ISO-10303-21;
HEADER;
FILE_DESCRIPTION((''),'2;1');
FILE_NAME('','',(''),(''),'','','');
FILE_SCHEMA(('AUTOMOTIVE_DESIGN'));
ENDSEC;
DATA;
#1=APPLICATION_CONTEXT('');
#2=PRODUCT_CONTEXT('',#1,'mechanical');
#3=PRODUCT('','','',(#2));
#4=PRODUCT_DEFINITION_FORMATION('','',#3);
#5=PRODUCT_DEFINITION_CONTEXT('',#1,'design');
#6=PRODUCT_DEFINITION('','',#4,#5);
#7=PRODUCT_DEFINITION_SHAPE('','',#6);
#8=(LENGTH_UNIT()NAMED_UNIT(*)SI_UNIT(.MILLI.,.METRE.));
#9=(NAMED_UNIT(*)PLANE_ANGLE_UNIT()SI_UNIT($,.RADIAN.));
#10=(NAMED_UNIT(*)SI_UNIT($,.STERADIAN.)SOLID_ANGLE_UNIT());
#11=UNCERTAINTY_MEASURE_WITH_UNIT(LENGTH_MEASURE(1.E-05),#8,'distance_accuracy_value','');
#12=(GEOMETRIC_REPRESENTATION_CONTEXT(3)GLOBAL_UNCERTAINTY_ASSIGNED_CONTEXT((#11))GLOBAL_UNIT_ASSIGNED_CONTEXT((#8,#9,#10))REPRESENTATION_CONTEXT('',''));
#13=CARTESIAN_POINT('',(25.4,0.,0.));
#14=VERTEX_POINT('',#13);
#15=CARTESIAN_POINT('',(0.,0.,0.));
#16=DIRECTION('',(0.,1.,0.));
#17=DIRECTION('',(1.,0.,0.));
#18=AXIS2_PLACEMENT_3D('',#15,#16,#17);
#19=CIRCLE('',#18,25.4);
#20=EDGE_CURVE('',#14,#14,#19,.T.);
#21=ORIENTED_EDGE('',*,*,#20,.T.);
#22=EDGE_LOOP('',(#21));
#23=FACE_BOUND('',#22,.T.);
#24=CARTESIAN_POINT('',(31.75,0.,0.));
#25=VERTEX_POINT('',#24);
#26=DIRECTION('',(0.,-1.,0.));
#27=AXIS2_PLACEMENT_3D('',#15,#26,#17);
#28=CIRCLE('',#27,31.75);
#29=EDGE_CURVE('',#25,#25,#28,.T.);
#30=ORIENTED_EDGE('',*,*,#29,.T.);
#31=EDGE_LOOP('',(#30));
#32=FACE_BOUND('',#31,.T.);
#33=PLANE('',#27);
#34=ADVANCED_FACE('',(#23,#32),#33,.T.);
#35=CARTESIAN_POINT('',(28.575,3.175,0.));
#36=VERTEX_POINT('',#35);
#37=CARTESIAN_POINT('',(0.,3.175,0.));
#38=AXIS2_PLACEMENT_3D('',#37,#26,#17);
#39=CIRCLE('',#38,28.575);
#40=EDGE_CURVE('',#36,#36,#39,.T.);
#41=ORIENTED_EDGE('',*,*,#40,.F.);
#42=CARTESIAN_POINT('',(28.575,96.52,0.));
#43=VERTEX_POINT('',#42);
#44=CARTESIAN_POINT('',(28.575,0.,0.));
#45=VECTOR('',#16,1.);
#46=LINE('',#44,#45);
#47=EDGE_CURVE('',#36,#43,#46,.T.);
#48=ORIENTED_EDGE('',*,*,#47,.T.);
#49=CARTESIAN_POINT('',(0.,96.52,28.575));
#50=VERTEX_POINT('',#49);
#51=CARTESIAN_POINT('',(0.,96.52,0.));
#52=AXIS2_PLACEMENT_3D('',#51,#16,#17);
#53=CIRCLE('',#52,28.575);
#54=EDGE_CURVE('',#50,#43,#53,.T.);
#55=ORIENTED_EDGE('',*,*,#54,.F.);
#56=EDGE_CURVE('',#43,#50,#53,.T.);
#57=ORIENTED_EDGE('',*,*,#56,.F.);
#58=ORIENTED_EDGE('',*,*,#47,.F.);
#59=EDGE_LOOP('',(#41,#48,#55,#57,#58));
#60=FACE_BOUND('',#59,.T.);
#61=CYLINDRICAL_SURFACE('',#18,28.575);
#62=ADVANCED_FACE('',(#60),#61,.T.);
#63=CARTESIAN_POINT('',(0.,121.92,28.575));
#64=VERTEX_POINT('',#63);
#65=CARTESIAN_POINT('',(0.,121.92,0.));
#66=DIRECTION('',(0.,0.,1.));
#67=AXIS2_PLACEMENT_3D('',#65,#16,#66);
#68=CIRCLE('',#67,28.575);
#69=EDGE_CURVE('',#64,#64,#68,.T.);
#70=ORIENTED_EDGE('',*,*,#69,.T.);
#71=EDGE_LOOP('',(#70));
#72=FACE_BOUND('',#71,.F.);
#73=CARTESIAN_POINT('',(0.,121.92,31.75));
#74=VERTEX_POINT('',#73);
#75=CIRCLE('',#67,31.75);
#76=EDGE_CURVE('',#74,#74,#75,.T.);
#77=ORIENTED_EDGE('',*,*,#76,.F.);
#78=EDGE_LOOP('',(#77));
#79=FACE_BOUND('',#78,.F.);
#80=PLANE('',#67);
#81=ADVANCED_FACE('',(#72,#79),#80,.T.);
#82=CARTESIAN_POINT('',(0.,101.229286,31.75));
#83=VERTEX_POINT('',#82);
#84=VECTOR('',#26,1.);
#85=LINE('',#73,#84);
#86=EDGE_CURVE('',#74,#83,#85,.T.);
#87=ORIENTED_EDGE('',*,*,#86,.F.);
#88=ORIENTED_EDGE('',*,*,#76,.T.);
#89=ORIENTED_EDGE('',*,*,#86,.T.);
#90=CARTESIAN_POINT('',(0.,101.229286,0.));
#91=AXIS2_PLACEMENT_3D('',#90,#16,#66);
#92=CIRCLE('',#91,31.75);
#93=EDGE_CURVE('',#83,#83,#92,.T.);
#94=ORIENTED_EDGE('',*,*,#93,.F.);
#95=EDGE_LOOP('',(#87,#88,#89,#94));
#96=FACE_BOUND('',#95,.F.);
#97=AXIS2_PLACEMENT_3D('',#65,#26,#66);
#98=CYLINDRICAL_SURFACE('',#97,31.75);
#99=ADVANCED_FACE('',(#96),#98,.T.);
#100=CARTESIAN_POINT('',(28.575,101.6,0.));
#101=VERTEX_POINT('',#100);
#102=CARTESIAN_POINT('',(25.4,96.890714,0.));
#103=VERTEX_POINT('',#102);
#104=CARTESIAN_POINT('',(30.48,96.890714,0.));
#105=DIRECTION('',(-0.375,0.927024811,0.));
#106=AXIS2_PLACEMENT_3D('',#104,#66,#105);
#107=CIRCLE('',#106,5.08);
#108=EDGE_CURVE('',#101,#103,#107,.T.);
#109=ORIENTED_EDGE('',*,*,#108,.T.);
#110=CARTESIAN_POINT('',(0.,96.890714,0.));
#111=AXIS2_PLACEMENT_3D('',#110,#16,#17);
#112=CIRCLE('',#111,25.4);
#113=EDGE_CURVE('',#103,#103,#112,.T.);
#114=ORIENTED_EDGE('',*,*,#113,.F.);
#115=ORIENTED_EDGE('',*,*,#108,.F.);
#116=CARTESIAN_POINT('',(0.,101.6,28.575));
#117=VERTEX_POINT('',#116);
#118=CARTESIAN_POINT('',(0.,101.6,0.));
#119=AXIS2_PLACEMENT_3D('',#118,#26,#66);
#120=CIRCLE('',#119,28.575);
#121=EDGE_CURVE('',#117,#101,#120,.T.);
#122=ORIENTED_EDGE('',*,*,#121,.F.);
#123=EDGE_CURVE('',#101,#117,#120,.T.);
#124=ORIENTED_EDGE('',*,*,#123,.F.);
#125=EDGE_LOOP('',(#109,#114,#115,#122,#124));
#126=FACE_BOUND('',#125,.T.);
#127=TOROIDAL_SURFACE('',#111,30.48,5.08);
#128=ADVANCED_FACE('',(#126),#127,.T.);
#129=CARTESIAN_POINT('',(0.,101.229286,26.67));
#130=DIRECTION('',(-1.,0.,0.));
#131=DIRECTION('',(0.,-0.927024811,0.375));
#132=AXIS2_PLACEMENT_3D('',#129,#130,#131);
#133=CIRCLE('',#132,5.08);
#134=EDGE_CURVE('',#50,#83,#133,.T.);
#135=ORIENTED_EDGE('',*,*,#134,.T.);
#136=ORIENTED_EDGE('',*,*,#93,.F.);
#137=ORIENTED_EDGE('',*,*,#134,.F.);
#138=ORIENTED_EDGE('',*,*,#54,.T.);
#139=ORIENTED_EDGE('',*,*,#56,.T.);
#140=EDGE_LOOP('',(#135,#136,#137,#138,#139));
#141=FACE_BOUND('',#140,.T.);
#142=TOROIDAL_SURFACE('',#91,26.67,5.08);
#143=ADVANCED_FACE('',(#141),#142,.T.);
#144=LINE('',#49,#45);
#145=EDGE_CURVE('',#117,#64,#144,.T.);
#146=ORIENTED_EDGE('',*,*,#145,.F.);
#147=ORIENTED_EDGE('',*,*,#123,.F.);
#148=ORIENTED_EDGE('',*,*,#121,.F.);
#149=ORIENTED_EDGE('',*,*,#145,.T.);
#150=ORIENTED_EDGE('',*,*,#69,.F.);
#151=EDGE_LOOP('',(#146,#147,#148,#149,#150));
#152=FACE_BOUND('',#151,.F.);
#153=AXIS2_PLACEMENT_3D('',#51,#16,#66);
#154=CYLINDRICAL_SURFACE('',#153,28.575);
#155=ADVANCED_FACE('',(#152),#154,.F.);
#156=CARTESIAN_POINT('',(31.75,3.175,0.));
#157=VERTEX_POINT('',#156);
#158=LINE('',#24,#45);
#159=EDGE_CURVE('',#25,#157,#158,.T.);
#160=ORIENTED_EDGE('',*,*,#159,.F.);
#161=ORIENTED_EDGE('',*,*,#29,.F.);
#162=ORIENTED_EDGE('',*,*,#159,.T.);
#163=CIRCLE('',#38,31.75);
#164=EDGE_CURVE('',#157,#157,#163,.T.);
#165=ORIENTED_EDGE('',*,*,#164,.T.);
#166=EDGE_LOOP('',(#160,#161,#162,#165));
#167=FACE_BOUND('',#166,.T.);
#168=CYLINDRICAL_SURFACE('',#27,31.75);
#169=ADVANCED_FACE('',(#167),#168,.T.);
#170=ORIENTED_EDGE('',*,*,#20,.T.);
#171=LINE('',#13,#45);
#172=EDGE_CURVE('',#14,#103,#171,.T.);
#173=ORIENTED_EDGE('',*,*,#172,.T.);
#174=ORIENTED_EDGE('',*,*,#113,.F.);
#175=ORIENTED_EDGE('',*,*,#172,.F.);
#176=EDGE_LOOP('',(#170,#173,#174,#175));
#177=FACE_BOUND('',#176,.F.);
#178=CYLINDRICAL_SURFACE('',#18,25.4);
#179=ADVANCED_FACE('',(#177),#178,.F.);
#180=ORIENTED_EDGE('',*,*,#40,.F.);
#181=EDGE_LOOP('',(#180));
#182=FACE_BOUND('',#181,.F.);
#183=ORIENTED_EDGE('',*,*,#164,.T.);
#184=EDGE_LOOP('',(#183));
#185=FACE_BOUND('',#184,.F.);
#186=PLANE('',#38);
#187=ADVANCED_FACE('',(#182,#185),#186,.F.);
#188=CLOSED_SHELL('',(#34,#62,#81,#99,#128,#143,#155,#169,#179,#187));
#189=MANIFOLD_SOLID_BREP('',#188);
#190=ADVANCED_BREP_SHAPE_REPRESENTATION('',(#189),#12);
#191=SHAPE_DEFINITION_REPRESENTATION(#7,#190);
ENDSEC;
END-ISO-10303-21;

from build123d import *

# Parameters (mm, degrees)
F0_R     = 28.575
F0_R_2   = 25.4
F0_R_3   = 31.75
F3_DEPTH = 3.175


# Not quite as in the source:
# - a fillet or chamfer that OpenCascade refuses, or shapes differently, is made with other operations: its cross-section is extruded or revolved along the edge and cut away or added


with BuildPart() as f2:
    # F2: sweep along a path in F1
    with BuildLine(Plane.YZ) as f2_path:
        Line((0, 0), (101.6, 0))
    # F0 (on Front) → F2 (sweep)
    with BuildSketch(Plane.XZ):
        Circle(F0_R)
        Circle(F0_R_2, mode=Mode.SUBTRACT)
    sweep(path=f2_path.line)

    # F0 (on Front) → F3 (join)
    with BuildSketch(Plane.XZ):
        Circle(F0_R_3)
        Circle(F0_R, mode=Mode.SUBTRACT)
    extrude(amount=-F3_DEPTH)

    # F1 (on Right) → F4 (revolve)
    with BuildSketch(Plane.YZ):
        Polygon((96.52, 28.575), (101.6, 28.575), (121.92, 28.575), (121.92, 31.75), (96.52, 31.75), align=None)
    revolve(axis=Axis((0, 50.8, 0), (0, 1, 0)))

    # F5: fillet of radius 5.08 on 2 edges, made by hand

    # F5_s1 → F5_t2 (revolve, cut)
    with BuildSketch(Plane.XY):
        with BuildLine():
            ThreePointArc((28.575, 101.6), (26.2678865162, 99.7305202921), (25.4, 96.8907139607))
            Line((25.4, 96.8907139607), (25.4, 101.6))
            Line((25.4, 101.6), (28.575, 101.6))
        make_face()
    revolve(axis=Axis((0, 101.6, 0), (0, 1, 0)), mode=Mode.SUBTRACT)

    # F5_s3 → F5_t4 (revolve, cut)
    with BuildSketch(Plane.YZ):
        with BuildLine():
            ThreePointArc((96.52, 28.575), (98.3894797079, 30.8821134838), (101.2292860393, 31.75))
            Line((101.2292860393, 31.75), (96.52, 31.75))
            Line((96.52, 31.75), (96.52, 28.575))
        make_face()
    revolve(axis=Axis((0, 96.52, 0), (0, 1, 0)), mode=Mode.SUBTRACT)


solid = f2.part
